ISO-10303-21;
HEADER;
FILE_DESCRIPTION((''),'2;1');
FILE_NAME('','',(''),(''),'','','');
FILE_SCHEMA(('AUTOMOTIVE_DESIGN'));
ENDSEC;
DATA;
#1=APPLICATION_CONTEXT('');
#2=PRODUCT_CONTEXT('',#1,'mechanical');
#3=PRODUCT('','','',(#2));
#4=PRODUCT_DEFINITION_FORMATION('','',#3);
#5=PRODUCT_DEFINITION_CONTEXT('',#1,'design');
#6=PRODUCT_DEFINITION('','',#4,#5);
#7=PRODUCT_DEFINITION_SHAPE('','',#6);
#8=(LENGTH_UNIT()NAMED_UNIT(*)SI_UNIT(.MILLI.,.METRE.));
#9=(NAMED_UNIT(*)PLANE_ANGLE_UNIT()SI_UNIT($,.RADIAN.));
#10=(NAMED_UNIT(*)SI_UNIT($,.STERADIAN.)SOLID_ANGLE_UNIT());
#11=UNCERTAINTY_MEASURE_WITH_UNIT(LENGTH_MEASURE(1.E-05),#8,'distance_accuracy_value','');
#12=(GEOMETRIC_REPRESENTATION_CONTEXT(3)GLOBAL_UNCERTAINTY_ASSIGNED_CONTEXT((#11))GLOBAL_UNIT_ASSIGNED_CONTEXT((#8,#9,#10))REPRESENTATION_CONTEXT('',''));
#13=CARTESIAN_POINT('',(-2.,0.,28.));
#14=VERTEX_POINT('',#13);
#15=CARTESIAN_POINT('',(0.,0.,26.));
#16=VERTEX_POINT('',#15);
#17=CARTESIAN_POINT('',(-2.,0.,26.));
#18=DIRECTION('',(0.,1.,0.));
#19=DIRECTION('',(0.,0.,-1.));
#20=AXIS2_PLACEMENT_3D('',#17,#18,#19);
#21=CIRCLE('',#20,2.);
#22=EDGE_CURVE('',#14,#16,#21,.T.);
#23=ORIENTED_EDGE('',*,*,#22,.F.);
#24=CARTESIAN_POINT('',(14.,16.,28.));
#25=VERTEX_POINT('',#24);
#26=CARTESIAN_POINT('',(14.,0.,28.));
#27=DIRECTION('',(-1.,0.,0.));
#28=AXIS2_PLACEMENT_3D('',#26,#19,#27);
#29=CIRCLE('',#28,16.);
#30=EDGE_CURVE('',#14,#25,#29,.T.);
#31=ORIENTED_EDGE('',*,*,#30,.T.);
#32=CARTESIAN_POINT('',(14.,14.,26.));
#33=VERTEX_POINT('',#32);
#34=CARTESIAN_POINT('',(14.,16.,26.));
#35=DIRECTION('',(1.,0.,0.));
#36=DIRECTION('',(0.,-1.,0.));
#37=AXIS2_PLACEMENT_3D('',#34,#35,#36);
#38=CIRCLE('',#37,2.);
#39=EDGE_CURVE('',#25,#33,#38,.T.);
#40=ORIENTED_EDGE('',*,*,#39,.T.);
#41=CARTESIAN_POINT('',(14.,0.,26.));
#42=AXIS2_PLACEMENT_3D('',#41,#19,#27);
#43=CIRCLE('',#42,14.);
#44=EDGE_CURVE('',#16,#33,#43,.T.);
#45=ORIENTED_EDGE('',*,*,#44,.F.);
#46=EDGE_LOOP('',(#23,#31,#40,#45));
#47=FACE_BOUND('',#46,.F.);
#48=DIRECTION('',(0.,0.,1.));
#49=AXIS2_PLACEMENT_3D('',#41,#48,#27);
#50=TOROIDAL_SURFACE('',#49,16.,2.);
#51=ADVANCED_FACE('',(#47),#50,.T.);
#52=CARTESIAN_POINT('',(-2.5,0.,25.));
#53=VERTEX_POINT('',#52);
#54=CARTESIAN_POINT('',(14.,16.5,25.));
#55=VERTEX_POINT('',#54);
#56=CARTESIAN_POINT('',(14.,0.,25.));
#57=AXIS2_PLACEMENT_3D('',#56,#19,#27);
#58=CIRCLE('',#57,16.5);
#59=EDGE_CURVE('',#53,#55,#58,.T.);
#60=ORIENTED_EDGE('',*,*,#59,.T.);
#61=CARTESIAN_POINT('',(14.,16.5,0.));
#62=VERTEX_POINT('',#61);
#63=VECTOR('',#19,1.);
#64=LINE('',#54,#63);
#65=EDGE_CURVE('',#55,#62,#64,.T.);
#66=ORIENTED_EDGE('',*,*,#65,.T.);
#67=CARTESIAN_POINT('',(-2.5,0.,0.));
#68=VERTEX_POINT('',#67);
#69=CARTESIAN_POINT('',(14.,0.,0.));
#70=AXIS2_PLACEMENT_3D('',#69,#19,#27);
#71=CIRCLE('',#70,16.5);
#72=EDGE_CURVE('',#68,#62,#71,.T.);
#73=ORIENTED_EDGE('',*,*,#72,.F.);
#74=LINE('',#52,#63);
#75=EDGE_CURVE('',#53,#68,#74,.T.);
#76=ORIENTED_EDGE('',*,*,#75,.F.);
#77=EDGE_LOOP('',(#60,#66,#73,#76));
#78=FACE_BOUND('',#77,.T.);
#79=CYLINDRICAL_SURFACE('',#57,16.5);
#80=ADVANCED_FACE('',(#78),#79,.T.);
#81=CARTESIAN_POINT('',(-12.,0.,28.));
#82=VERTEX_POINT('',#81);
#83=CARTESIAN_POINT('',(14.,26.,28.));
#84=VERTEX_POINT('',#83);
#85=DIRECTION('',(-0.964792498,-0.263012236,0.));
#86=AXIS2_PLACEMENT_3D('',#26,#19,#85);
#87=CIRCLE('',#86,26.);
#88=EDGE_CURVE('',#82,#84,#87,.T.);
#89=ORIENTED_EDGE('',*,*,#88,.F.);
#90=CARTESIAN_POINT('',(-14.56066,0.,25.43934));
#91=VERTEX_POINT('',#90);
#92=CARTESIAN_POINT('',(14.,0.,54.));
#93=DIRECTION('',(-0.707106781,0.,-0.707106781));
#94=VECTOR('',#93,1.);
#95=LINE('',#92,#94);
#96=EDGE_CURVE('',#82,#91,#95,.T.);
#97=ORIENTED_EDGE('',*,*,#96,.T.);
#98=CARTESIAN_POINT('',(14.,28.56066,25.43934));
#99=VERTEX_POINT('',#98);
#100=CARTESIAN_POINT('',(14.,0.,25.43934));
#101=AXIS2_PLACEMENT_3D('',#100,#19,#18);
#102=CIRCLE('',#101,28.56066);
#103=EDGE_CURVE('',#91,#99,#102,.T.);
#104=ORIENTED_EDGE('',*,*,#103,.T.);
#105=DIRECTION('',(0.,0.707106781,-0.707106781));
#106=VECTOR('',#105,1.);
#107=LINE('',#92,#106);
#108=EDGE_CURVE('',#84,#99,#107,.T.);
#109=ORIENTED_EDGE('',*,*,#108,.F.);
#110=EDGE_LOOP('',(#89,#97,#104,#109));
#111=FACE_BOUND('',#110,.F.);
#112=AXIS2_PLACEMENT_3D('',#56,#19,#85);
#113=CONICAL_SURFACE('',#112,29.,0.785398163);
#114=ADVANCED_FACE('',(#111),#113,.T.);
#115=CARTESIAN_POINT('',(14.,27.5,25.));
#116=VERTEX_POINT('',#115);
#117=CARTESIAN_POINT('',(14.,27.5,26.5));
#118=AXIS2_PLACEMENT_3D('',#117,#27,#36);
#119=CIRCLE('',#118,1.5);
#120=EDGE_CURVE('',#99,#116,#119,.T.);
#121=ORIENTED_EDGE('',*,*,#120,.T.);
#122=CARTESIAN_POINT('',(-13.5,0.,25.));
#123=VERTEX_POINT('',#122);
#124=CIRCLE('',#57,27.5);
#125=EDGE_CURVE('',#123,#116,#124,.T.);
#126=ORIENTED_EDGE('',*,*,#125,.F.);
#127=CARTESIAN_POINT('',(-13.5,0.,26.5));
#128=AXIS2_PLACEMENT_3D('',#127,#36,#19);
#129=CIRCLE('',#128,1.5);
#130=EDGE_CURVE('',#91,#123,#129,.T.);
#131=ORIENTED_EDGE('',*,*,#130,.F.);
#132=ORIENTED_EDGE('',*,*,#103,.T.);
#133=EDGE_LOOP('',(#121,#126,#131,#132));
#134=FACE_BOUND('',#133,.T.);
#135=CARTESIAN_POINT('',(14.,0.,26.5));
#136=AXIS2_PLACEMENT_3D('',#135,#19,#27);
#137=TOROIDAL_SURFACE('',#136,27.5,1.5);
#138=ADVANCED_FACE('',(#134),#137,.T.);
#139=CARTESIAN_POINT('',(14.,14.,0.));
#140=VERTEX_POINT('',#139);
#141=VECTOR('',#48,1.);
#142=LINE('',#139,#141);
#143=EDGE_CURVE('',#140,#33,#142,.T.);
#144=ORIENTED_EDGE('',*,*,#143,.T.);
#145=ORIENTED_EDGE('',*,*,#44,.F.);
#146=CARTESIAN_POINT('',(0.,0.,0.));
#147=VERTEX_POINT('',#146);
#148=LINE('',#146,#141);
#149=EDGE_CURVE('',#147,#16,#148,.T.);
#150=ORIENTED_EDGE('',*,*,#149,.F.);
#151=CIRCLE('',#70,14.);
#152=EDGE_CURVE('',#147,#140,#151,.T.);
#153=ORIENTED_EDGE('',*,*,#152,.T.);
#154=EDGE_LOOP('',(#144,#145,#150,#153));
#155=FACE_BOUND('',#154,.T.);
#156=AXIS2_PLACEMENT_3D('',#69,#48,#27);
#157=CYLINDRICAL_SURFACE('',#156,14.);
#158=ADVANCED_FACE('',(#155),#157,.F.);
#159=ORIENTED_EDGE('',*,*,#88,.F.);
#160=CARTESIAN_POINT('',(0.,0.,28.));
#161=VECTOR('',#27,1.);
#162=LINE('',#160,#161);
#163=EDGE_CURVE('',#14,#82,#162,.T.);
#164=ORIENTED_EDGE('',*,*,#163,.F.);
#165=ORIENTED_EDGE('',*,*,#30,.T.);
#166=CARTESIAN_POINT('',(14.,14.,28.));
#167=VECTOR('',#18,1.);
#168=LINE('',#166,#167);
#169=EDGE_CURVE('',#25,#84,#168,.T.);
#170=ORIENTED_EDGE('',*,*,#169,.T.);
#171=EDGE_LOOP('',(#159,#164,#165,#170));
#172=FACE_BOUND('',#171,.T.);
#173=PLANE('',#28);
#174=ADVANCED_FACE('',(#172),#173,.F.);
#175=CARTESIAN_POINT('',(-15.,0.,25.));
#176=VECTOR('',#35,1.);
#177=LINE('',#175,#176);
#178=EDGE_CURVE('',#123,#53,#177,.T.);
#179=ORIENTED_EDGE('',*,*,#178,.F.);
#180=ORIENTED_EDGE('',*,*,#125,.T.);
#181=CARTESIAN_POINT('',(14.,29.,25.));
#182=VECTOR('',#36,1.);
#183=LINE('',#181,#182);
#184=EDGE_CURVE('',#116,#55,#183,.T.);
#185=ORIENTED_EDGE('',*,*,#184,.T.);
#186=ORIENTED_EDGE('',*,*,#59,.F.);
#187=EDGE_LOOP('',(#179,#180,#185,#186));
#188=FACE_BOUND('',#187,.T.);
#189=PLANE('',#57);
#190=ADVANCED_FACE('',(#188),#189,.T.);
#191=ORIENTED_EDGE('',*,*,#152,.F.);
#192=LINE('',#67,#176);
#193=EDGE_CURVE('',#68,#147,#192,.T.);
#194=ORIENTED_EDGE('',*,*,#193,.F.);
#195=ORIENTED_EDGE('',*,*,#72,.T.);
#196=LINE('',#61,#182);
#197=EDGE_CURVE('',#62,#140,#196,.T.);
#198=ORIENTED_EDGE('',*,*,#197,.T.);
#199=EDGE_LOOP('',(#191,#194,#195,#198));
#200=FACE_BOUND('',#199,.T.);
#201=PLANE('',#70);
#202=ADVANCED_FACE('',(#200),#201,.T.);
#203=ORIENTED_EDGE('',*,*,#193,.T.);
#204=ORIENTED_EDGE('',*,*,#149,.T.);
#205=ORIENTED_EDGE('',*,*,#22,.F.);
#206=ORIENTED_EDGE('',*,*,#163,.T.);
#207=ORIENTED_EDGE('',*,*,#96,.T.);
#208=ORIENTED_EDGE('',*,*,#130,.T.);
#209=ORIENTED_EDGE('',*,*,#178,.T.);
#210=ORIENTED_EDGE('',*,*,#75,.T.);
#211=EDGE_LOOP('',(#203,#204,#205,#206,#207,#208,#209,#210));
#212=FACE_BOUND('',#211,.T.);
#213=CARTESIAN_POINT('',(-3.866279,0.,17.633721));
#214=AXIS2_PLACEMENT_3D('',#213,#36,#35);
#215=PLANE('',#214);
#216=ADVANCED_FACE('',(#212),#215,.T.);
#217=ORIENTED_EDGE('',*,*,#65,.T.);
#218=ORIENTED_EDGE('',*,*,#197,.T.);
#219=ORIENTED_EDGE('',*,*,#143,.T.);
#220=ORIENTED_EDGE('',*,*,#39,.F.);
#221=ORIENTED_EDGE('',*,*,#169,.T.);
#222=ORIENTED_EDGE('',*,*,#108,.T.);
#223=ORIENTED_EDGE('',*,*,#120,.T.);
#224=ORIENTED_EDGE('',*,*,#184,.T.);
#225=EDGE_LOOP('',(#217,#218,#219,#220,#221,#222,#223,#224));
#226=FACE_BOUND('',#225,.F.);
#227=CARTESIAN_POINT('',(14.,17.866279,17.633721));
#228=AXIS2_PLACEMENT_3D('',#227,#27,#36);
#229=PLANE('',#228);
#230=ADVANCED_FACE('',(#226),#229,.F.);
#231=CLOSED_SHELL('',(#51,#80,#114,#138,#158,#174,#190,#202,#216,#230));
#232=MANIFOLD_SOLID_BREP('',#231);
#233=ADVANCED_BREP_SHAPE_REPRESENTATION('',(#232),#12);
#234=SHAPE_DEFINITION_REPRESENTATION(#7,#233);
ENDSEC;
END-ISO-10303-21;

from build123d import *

# Parameters (mm, degrees)
F1_ANGLE    = 90
F2_R        = 1.5
F3_T2_ANGLE = 120.4977458854
F4_R        = 2


# Not quite as in the source:
# - a fillet or chamfer that OpenCascade refuses, or shapes differently, is made with other operations: its cross-section is extruded or revolved along the edge and cut away or added


with BuildPart() as f1:
    # F0 (on Front) → F1 (revolve)
    with BuildSketch(Plane.XZ):
        Polygon((-2.5, 0), (0, 0), (0, 28), (-15, 28), (-15, 25), (-12.5, 25), (-2.5, 25), align=None)
    revolve(axis=Axis((14, 0, -3.1492561102), (0, 0, -1)), revolution_arc=F1_ANGLE)

    # F2
    f2_edges = [f1.edges().sort_by_distance(p)[0] for p in [
        (-6.506097, 20.506097, 25),
    ]]
    fillet(f2_edges, radius=F2_R)

    # F3: chamfer of 3 on 1 edges, made by hand

    # F3_s1 → F3_t2 (revolve, cut)
    with BuildSketch(Plane(origin=(0.9684561095, -3.5525312522, 0), x_dir=(0, 0, 1), z_dir=(0.2630122362, -0.9647924977, 0))):
        Polygon((25, 15.4929050323), (28, 12.4929050323), (28, 15.4929050323), align=None)
    revolve(axis=Axis((14, 0, 28), (0, 0, -1)), revolution_arc=F3_T2_ANGLE, mode=Mode.SUBTRACT)

    # F4
    f4_edges = [f1.edges().sort_by_distance(p)[0] for p in [
        (4.100505, 9.899495, 28),
    ]]
    fillet(f4_edges, radius=F4_R)


solid = f1.part
